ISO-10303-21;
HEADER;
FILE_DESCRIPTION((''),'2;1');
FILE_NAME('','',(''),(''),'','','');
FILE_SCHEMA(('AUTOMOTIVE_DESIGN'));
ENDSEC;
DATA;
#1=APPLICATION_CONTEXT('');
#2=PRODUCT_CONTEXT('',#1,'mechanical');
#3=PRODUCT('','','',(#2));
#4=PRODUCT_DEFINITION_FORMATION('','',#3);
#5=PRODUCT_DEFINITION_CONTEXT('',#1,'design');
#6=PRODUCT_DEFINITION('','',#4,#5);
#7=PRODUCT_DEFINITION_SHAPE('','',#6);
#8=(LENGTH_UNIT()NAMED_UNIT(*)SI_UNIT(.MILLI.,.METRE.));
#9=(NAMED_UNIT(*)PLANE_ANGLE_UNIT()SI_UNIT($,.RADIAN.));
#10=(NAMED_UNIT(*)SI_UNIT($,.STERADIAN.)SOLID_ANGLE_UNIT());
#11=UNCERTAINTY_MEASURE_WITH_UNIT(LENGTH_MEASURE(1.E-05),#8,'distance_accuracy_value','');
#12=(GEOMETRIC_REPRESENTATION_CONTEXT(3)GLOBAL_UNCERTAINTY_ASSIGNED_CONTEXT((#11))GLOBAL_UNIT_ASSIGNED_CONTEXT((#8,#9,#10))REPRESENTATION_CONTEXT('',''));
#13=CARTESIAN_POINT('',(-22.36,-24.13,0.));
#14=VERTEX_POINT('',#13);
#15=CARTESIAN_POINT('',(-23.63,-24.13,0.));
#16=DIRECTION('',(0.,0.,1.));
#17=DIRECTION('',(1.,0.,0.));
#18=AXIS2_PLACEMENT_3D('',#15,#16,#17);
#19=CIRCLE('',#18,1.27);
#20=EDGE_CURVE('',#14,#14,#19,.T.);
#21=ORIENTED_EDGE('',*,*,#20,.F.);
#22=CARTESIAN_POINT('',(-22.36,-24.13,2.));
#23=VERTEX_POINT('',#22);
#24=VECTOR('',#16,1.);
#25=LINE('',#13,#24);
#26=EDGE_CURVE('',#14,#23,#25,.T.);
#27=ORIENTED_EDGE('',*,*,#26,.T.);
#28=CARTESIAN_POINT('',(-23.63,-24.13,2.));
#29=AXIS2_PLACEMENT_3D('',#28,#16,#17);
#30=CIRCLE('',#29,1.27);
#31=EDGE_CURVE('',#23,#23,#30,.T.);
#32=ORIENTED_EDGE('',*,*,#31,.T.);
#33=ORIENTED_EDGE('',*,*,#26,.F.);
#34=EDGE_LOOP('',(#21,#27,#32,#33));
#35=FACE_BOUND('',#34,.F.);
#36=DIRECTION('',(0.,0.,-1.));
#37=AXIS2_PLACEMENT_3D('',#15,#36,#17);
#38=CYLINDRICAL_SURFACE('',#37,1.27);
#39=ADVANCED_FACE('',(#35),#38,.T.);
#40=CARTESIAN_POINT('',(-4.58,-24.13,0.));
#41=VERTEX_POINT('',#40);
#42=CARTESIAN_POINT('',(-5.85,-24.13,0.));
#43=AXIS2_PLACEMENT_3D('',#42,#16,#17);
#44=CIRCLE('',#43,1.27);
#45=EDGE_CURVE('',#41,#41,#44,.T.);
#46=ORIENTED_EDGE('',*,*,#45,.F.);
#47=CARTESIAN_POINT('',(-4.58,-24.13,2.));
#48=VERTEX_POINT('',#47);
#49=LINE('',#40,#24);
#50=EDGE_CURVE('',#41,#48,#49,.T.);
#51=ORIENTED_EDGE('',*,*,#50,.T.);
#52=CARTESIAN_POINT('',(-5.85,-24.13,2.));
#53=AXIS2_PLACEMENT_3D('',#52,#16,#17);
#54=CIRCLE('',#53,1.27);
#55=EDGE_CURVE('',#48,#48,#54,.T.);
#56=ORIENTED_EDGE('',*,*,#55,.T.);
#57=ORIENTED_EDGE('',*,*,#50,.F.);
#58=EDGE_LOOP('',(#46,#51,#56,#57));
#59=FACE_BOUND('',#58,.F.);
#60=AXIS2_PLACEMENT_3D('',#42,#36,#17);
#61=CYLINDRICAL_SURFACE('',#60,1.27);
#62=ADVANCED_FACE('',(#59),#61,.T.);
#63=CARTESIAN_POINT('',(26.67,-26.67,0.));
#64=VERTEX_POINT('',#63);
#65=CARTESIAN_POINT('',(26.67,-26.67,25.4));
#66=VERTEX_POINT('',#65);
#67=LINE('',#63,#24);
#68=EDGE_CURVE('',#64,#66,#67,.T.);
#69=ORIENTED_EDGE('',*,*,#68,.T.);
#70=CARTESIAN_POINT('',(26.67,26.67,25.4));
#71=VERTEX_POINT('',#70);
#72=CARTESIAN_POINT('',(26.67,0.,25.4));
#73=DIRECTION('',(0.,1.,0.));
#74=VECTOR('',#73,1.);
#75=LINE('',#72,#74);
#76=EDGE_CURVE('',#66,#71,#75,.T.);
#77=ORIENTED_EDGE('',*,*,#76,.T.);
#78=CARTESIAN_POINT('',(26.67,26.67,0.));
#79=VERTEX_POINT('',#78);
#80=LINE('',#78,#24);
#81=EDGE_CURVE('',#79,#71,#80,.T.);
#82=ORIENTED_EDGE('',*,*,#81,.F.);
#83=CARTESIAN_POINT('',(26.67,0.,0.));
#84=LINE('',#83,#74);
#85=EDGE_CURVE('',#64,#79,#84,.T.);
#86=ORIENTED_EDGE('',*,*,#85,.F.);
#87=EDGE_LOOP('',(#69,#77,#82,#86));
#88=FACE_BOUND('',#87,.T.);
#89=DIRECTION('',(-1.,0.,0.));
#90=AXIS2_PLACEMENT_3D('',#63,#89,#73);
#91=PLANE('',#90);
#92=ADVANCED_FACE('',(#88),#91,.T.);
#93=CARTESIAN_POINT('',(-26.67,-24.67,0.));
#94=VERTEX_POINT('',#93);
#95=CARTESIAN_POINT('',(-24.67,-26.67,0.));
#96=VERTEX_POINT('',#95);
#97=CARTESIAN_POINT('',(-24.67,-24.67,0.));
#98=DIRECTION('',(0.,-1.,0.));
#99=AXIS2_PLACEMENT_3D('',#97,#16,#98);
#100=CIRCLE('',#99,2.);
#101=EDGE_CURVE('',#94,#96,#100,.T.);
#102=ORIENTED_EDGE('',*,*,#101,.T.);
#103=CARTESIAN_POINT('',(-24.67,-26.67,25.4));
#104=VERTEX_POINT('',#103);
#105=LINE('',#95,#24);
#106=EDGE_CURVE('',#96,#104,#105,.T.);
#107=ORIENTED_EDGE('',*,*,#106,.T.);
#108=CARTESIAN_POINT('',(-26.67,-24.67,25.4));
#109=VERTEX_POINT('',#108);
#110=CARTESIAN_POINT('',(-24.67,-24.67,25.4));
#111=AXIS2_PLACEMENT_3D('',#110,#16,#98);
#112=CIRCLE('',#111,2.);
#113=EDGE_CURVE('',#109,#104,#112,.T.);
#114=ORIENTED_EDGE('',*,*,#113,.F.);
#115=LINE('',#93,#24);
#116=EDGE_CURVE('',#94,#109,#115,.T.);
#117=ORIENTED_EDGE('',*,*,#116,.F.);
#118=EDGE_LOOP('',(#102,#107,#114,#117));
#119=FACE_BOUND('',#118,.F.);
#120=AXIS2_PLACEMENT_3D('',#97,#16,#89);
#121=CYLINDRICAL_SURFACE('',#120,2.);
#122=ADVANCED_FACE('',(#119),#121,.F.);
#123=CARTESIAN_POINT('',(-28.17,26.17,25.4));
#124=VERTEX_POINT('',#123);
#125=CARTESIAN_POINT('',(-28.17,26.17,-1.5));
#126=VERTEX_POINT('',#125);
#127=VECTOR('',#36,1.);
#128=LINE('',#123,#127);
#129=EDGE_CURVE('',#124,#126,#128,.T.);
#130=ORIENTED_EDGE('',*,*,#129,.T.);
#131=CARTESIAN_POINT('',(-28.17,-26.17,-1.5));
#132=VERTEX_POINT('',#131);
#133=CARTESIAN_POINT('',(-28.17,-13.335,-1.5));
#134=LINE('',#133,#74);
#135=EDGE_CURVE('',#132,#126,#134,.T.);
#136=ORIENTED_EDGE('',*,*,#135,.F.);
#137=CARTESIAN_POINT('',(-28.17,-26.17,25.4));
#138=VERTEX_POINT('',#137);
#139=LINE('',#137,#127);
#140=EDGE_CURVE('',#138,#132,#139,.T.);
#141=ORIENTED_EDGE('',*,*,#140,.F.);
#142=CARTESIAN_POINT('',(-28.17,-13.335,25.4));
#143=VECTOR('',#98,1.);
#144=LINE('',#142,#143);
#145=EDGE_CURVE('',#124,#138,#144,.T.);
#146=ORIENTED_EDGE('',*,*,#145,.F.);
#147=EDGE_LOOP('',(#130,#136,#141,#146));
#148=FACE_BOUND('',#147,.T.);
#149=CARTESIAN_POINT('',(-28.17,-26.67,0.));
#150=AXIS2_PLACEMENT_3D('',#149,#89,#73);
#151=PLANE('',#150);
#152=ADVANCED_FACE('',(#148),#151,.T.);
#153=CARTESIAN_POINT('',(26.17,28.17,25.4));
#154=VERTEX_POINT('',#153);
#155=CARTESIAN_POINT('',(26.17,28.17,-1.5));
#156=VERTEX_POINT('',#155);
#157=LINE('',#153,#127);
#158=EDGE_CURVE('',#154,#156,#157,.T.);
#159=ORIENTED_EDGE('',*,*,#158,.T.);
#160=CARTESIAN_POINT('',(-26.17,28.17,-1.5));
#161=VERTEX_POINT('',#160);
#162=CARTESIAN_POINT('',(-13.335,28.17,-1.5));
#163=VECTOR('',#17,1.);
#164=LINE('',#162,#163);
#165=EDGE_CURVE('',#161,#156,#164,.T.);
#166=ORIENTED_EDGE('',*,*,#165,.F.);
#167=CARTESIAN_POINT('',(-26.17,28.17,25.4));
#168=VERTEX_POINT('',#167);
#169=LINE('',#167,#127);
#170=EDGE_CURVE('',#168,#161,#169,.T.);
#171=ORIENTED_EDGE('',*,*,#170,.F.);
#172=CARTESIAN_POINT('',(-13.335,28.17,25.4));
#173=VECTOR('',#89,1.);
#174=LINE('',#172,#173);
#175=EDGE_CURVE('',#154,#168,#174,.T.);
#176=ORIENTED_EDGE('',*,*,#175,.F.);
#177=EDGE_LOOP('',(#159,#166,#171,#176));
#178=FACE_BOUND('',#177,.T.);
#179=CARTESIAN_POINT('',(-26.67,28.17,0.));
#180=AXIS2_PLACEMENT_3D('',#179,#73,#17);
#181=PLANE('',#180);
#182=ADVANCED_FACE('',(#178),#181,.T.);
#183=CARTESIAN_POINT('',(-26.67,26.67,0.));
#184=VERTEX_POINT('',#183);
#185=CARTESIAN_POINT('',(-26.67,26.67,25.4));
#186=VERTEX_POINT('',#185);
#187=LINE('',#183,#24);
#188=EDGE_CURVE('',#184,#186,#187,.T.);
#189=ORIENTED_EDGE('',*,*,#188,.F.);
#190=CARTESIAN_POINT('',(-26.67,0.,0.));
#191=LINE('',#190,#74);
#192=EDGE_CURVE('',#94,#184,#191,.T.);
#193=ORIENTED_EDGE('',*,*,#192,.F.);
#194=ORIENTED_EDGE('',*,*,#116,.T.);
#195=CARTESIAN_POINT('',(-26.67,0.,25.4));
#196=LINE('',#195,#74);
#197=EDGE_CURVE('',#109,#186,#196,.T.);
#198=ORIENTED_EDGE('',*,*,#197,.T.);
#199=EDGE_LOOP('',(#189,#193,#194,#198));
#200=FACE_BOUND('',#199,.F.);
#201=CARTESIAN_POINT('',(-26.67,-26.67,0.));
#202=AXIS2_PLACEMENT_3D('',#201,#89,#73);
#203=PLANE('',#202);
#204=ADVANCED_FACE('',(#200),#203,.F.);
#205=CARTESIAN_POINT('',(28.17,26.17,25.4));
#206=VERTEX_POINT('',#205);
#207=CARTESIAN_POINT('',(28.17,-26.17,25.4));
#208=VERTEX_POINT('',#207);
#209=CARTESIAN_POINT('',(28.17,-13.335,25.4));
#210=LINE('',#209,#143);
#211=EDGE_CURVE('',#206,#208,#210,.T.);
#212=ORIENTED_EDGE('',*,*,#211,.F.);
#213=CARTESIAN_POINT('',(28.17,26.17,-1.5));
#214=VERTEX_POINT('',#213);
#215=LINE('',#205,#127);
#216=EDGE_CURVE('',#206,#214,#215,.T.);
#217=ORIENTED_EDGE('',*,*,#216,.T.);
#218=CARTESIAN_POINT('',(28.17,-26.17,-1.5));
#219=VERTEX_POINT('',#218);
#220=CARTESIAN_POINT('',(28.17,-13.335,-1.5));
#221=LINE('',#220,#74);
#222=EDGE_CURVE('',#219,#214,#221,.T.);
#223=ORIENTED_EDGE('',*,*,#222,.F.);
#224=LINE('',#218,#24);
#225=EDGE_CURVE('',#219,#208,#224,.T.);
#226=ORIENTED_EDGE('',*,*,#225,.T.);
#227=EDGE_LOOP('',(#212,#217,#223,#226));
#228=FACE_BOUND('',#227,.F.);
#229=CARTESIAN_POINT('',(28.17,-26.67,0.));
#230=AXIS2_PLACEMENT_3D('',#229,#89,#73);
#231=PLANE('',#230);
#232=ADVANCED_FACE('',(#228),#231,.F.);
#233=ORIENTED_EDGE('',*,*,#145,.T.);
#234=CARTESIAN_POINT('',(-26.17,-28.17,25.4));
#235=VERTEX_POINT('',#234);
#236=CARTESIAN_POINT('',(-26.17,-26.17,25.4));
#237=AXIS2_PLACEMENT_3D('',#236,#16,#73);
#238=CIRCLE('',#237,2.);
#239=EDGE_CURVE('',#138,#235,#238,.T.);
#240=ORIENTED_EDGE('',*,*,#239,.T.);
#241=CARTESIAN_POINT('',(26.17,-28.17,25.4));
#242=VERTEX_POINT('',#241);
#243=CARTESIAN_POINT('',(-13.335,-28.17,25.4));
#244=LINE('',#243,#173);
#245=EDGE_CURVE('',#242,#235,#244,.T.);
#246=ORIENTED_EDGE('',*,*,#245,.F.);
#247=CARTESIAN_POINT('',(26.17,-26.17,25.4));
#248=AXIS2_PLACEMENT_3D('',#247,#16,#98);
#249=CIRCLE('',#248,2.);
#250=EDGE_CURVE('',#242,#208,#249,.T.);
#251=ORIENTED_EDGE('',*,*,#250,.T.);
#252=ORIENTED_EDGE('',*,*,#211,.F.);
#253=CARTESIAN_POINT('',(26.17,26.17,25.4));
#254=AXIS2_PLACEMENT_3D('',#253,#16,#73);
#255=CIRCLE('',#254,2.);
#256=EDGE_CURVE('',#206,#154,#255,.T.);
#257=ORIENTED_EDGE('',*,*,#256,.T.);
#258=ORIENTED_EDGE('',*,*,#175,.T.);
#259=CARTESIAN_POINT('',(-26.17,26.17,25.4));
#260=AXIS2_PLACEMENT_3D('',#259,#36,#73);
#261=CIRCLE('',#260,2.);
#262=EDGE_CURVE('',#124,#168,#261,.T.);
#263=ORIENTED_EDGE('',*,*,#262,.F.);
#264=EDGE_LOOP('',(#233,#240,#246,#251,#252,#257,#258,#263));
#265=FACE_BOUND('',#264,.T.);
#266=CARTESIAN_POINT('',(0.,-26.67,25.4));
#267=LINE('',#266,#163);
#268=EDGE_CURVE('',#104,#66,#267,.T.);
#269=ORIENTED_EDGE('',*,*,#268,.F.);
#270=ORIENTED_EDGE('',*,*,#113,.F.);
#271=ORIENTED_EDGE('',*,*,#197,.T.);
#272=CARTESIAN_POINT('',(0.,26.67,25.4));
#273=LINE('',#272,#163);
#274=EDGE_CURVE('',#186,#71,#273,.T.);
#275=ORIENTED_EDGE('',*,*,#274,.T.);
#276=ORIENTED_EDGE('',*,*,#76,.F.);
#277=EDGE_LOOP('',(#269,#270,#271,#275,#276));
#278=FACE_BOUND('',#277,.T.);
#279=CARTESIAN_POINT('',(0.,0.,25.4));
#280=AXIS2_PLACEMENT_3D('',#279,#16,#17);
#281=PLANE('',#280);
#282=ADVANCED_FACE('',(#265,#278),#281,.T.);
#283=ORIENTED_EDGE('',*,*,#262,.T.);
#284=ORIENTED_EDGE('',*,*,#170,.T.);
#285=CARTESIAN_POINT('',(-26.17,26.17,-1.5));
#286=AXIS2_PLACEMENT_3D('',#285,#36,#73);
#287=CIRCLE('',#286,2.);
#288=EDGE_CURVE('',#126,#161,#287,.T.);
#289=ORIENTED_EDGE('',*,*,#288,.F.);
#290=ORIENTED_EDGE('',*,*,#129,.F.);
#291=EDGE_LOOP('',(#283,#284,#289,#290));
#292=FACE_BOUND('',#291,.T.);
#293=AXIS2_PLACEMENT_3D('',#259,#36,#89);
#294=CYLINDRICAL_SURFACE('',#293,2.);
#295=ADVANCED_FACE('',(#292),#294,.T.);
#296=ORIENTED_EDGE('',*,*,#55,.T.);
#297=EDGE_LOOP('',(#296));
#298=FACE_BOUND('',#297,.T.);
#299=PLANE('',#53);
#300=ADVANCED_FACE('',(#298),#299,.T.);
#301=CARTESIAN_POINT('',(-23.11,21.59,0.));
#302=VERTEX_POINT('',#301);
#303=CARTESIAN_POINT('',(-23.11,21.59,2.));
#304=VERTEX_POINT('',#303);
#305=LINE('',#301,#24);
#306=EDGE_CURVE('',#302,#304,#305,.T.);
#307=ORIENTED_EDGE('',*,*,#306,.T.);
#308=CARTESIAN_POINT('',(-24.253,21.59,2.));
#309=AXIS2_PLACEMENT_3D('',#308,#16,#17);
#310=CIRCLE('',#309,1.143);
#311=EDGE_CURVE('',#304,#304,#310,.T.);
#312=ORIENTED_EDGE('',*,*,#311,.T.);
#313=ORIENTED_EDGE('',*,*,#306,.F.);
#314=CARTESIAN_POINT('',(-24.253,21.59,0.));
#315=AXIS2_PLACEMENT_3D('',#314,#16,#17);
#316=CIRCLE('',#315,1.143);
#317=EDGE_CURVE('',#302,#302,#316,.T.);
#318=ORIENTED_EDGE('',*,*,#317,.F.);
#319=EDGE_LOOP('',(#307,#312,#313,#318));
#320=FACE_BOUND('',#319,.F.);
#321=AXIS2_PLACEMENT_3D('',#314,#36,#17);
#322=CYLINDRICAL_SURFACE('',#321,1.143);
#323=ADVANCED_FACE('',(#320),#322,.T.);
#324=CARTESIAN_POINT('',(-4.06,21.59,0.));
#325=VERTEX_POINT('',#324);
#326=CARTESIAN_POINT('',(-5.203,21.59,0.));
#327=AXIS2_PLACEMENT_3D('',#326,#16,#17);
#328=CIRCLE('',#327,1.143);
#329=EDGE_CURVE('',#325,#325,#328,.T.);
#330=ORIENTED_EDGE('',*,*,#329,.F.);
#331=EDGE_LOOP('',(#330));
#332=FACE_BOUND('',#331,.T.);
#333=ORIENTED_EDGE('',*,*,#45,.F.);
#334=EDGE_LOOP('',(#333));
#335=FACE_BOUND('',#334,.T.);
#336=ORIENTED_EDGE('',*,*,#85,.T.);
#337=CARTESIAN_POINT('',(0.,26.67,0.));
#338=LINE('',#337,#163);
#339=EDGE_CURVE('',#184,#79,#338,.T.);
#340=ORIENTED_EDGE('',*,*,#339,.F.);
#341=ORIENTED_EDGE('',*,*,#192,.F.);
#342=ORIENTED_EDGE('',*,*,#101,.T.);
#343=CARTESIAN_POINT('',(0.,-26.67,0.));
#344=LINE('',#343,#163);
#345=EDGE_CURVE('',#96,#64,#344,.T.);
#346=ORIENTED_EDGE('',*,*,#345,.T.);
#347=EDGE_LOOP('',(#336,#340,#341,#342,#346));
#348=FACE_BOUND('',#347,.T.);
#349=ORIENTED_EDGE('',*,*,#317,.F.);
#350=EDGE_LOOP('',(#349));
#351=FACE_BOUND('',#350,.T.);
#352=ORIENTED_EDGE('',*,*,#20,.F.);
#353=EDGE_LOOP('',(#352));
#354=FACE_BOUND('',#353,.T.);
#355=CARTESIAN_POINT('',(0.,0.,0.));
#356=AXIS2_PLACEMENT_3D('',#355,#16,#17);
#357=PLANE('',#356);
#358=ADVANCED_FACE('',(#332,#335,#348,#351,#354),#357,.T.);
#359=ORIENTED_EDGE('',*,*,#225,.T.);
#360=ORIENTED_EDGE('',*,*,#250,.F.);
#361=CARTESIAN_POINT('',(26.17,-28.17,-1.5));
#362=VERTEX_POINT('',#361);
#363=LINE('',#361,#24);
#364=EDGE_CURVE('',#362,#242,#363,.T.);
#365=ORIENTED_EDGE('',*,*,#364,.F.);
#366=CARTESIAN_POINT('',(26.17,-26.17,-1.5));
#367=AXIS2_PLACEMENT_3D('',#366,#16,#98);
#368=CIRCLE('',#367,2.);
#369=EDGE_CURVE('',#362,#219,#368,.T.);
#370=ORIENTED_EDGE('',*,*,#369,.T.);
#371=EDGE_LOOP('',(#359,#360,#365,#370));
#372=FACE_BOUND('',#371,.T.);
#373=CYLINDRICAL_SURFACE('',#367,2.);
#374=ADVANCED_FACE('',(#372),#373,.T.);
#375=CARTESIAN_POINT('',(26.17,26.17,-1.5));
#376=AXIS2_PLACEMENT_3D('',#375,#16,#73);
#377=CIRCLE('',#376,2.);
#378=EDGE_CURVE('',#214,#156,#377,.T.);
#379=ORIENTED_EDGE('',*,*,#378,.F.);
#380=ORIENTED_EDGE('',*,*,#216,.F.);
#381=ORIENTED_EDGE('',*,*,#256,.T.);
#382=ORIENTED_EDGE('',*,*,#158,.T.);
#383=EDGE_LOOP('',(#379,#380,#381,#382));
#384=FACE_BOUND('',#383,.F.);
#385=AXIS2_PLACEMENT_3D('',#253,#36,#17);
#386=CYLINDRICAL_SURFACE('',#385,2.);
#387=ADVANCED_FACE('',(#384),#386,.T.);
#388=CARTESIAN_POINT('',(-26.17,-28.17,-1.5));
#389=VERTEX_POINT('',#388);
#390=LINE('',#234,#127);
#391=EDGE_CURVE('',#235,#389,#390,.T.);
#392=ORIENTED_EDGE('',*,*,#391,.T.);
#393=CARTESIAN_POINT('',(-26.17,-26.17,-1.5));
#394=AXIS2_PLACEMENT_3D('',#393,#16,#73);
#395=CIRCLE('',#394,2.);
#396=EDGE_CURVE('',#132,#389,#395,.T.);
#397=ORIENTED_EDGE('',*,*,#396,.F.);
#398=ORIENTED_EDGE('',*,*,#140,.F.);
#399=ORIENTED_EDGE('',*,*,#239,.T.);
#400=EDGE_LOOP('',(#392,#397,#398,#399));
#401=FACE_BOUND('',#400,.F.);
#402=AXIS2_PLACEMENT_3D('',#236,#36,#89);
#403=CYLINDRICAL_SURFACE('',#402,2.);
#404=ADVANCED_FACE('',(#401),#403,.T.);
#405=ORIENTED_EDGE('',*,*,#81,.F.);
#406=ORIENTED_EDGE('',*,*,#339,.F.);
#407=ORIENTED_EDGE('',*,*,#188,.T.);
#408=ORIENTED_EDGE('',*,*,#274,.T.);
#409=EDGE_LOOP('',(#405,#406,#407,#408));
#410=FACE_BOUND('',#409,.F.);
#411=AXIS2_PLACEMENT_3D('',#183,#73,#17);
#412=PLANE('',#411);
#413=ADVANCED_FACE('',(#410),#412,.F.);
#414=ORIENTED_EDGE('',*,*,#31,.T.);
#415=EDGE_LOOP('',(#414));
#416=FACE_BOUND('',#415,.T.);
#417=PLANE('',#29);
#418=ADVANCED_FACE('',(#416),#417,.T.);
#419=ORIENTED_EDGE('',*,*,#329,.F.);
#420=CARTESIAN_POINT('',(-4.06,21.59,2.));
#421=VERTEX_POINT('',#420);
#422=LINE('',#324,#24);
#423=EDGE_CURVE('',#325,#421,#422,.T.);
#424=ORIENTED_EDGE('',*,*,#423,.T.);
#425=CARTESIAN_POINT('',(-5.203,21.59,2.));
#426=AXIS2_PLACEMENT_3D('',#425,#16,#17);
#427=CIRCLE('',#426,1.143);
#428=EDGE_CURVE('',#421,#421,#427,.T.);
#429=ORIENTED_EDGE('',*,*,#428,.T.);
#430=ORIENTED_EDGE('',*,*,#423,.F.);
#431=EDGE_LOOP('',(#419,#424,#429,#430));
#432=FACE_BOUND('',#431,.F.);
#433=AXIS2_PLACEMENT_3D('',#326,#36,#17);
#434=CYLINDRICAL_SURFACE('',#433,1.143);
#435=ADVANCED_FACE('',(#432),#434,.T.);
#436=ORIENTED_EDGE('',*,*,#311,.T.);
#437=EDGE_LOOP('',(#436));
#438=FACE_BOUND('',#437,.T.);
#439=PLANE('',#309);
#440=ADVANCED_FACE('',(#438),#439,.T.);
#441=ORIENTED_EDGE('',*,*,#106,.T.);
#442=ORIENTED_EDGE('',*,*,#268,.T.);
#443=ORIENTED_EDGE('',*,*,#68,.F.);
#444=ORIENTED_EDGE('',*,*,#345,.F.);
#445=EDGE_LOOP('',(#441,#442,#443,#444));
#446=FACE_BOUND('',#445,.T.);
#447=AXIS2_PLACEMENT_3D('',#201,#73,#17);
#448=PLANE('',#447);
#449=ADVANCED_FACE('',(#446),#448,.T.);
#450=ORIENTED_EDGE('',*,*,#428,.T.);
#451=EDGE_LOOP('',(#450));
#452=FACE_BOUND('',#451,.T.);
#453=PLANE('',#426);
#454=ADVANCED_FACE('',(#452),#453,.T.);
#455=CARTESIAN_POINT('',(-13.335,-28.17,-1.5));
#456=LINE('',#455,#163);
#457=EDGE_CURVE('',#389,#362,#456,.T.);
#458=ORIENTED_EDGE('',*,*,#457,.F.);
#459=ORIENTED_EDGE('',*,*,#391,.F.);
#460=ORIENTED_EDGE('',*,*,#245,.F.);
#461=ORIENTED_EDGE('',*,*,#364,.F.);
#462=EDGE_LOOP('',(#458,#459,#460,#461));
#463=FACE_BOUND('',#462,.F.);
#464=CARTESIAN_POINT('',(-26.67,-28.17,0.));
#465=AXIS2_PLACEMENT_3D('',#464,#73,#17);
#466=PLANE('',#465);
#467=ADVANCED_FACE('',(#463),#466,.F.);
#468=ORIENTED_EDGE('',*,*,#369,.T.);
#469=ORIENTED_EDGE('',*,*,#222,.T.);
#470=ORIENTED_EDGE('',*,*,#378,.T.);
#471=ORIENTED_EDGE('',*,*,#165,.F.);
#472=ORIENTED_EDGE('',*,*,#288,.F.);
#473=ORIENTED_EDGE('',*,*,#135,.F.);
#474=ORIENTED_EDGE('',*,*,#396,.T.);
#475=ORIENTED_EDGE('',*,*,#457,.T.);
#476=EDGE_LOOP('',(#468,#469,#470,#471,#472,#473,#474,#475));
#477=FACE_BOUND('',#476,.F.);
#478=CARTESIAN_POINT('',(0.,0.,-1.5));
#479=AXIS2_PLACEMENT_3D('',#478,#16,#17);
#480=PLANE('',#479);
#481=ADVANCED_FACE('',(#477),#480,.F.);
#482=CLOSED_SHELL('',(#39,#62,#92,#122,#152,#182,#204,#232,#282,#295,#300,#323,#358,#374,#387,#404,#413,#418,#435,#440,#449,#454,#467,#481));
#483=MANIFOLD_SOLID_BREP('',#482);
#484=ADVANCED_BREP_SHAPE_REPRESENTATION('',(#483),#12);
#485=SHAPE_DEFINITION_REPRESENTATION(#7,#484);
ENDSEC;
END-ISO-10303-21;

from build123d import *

# Parameters (mm, degrees)
F0_W     = 53.34
F0_H     = 53.34
F1_DEPTH = 25.4
F2_T     = 1.5
F3_R     = 1.27
F3_R_2   = 1.143
F4_DEPTH = 2
F5_R     = 2


# Not quite as in the source:
# - two fillets or chamfers of one size are made in one step


with BuildPart() as f1:
    # F0 (on Top) → F1 (new body)
    with BuildSketch(Plane.XY):
        Rectangle(F0_W, F0_H)
    extrude(amount=F1_DEPTH)

    # F2
    f2_openings = [f1.faces().sort_by_distance(p)[0] for p in [
        (0, 0, 25.4),
    ]]
    offset(amount=F2_T, openings=f2_openings, kind=Kind.INTERSECTION)

    # F3 (on face) → F4 (join)
    with BuildSketch(Plane.XY):
        with Locations((-23.63, -24.13)):
            Circle(F3_R)
        with Locations((-5.85, -24.13)):
            Circle(F3_R)
        with Locations((-24.253, 21.59)):
            Circle(F3_R_2)
        with Locations((-5.203, 21.59)):
            Circle(F3_R_2)
    extrude(amount=F4_DEPTH)

    # F5
    f5_edges = [f1.edges().sort_by_distance(p)[0] for p in [
        (-26.67, -26.67, 12.7),
        (28.17, -28.17, 11.95),
        (-28.17, -28.17, 11.95),
        (28.17, 28.17, 11.95),
        (-28.17, 28.17, 11.95),
    ]]
    fillet(f5_edges, radius=F5_R)


solid = f1.part
